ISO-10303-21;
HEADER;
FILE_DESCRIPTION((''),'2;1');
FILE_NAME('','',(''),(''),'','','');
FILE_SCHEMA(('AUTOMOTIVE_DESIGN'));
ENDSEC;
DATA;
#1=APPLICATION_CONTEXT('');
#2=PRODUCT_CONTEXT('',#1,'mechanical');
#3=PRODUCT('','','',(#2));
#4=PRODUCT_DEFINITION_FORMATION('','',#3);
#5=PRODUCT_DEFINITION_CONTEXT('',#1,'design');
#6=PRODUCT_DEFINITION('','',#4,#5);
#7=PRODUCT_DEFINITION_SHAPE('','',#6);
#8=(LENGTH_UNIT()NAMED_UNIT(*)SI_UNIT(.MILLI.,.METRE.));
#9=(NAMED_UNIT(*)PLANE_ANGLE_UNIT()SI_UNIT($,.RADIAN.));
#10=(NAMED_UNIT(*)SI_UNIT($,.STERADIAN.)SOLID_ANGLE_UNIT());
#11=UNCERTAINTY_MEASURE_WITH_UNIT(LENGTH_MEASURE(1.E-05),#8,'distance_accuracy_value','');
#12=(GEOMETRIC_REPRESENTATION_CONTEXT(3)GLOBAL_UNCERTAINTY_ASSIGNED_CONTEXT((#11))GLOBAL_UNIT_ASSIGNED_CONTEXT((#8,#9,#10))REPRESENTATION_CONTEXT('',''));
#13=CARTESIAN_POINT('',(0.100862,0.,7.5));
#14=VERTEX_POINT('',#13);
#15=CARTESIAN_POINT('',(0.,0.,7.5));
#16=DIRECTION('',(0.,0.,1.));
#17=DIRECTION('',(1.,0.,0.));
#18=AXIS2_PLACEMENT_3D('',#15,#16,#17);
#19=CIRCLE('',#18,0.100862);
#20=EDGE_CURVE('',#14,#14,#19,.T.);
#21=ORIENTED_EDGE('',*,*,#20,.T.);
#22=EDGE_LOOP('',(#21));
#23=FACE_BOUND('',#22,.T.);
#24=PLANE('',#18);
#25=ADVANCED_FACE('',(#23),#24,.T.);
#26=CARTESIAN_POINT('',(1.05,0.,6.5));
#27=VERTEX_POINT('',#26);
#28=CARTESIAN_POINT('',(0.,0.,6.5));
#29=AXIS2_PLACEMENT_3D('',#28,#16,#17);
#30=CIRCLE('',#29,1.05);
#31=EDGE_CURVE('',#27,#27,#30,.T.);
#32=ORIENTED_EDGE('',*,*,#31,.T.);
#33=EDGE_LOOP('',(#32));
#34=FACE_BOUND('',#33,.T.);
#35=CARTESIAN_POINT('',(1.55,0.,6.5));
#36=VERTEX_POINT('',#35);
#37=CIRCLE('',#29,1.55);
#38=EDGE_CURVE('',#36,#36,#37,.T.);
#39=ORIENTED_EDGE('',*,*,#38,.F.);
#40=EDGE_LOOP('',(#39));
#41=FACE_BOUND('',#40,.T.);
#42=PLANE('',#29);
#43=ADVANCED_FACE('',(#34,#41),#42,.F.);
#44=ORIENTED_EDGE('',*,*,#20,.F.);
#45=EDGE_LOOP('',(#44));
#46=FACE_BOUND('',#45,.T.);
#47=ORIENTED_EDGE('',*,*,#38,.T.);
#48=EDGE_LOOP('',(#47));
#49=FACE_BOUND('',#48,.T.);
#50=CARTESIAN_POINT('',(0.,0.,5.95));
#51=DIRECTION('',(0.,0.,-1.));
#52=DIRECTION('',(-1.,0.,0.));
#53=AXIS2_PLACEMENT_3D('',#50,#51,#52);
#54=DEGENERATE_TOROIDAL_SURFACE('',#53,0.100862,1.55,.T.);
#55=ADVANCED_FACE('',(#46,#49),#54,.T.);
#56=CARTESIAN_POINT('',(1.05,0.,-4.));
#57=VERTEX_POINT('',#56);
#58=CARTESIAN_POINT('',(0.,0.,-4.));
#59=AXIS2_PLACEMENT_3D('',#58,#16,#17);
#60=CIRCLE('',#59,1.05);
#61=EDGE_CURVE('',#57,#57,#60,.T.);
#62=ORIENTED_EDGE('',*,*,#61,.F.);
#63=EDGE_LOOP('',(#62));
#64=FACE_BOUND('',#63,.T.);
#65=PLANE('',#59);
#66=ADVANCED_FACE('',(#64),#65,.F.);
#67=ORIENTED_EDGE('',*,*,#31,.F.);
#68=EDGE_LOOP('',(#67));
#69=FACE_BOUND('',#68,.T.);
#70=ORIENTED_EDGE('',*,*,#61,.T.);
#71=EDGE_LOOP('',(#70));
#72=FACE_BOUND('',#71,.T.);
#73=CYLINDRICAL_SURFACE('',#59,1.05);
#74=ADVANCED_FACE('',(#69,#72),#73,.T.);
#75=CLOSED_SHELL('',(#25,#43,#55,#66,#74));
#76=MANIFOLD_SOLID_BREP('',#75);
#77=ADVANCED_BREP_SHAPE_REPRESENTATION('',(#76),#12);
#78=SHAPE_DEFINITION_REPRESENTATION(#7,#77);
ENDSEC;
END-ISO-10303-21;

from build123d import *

# Parameters (mm, degrees)
DODANIE_WYCI_GNI_CIE1_DEPTH      = 6.5
DODANIE_WYCI_GNI_CIE1_DEPTH_BACK = 4
SZKIC1_R                         = 1.05
SZKIC2_R                         = 1.55
DODANIE_WYCI_GNI_CIE2_DEPTH      = 1
ZAOKR_GLENIE1_R                  = 1.55


with BuildPart() as part:
    # Szkic1 → Dodanie-wyciągnięcie1 (new, two sides: drawn at the far end of the back side and taken through both)
    with BuildSketch(Plane.XY.offset(-DODANIE_WYCI_GNI_CIE1_DEPTH_BACK)):
        Circle(SZKIC1_R)
    extrude(amount=DODANIE_WYCI_GNI_CIE1_DEPTH + DODANIE_WYCI_GNI_CIE1_DEPTH_BACK)

    # Szkic2 → Dodanie-wyciągnięcie2 (add)
    with BuildSketch(Plane.XY.offset(6.5)):
        Circle(SZKIC2_R)
    extrude(amount=DODANIE_WYCI_GNI_CIE2_DEPTH)

    # Zaokrąglenie1
    # the kernel refuses this fillet: 1.55 mm, written as the material it takes off along each edge
    with BuildSketch(Plane(origin=(0, 0, 7.5), x_dir=(1, 0, 0), z_dir=(0, -1, 0))) as zaokr_glenie1_piece_1:
        with BuildLine():
            CenterArc((0.100862325, -1.55), ZAOKR_GLENIE1_R, 20.783559596, 69.216440404)
            Line((0.100862325, 0), (0.100862325, 0.031))
            Line((0.100862325, 0.031), (1.55, 0.031))
            Line((1.55, 0.031), (1.581, 0))
            ThreePointArc((1.581, 0), (1.581, -0.5), (1.578982753, -0.989))
            Line((1.578982753, -0.989), (1.55, -1))
        make_face()
    revolve(axis=Axis((0, 0, 7.5), (0, 0, 1)), mode=Mode.SUBTRACT)


solid = part.part
